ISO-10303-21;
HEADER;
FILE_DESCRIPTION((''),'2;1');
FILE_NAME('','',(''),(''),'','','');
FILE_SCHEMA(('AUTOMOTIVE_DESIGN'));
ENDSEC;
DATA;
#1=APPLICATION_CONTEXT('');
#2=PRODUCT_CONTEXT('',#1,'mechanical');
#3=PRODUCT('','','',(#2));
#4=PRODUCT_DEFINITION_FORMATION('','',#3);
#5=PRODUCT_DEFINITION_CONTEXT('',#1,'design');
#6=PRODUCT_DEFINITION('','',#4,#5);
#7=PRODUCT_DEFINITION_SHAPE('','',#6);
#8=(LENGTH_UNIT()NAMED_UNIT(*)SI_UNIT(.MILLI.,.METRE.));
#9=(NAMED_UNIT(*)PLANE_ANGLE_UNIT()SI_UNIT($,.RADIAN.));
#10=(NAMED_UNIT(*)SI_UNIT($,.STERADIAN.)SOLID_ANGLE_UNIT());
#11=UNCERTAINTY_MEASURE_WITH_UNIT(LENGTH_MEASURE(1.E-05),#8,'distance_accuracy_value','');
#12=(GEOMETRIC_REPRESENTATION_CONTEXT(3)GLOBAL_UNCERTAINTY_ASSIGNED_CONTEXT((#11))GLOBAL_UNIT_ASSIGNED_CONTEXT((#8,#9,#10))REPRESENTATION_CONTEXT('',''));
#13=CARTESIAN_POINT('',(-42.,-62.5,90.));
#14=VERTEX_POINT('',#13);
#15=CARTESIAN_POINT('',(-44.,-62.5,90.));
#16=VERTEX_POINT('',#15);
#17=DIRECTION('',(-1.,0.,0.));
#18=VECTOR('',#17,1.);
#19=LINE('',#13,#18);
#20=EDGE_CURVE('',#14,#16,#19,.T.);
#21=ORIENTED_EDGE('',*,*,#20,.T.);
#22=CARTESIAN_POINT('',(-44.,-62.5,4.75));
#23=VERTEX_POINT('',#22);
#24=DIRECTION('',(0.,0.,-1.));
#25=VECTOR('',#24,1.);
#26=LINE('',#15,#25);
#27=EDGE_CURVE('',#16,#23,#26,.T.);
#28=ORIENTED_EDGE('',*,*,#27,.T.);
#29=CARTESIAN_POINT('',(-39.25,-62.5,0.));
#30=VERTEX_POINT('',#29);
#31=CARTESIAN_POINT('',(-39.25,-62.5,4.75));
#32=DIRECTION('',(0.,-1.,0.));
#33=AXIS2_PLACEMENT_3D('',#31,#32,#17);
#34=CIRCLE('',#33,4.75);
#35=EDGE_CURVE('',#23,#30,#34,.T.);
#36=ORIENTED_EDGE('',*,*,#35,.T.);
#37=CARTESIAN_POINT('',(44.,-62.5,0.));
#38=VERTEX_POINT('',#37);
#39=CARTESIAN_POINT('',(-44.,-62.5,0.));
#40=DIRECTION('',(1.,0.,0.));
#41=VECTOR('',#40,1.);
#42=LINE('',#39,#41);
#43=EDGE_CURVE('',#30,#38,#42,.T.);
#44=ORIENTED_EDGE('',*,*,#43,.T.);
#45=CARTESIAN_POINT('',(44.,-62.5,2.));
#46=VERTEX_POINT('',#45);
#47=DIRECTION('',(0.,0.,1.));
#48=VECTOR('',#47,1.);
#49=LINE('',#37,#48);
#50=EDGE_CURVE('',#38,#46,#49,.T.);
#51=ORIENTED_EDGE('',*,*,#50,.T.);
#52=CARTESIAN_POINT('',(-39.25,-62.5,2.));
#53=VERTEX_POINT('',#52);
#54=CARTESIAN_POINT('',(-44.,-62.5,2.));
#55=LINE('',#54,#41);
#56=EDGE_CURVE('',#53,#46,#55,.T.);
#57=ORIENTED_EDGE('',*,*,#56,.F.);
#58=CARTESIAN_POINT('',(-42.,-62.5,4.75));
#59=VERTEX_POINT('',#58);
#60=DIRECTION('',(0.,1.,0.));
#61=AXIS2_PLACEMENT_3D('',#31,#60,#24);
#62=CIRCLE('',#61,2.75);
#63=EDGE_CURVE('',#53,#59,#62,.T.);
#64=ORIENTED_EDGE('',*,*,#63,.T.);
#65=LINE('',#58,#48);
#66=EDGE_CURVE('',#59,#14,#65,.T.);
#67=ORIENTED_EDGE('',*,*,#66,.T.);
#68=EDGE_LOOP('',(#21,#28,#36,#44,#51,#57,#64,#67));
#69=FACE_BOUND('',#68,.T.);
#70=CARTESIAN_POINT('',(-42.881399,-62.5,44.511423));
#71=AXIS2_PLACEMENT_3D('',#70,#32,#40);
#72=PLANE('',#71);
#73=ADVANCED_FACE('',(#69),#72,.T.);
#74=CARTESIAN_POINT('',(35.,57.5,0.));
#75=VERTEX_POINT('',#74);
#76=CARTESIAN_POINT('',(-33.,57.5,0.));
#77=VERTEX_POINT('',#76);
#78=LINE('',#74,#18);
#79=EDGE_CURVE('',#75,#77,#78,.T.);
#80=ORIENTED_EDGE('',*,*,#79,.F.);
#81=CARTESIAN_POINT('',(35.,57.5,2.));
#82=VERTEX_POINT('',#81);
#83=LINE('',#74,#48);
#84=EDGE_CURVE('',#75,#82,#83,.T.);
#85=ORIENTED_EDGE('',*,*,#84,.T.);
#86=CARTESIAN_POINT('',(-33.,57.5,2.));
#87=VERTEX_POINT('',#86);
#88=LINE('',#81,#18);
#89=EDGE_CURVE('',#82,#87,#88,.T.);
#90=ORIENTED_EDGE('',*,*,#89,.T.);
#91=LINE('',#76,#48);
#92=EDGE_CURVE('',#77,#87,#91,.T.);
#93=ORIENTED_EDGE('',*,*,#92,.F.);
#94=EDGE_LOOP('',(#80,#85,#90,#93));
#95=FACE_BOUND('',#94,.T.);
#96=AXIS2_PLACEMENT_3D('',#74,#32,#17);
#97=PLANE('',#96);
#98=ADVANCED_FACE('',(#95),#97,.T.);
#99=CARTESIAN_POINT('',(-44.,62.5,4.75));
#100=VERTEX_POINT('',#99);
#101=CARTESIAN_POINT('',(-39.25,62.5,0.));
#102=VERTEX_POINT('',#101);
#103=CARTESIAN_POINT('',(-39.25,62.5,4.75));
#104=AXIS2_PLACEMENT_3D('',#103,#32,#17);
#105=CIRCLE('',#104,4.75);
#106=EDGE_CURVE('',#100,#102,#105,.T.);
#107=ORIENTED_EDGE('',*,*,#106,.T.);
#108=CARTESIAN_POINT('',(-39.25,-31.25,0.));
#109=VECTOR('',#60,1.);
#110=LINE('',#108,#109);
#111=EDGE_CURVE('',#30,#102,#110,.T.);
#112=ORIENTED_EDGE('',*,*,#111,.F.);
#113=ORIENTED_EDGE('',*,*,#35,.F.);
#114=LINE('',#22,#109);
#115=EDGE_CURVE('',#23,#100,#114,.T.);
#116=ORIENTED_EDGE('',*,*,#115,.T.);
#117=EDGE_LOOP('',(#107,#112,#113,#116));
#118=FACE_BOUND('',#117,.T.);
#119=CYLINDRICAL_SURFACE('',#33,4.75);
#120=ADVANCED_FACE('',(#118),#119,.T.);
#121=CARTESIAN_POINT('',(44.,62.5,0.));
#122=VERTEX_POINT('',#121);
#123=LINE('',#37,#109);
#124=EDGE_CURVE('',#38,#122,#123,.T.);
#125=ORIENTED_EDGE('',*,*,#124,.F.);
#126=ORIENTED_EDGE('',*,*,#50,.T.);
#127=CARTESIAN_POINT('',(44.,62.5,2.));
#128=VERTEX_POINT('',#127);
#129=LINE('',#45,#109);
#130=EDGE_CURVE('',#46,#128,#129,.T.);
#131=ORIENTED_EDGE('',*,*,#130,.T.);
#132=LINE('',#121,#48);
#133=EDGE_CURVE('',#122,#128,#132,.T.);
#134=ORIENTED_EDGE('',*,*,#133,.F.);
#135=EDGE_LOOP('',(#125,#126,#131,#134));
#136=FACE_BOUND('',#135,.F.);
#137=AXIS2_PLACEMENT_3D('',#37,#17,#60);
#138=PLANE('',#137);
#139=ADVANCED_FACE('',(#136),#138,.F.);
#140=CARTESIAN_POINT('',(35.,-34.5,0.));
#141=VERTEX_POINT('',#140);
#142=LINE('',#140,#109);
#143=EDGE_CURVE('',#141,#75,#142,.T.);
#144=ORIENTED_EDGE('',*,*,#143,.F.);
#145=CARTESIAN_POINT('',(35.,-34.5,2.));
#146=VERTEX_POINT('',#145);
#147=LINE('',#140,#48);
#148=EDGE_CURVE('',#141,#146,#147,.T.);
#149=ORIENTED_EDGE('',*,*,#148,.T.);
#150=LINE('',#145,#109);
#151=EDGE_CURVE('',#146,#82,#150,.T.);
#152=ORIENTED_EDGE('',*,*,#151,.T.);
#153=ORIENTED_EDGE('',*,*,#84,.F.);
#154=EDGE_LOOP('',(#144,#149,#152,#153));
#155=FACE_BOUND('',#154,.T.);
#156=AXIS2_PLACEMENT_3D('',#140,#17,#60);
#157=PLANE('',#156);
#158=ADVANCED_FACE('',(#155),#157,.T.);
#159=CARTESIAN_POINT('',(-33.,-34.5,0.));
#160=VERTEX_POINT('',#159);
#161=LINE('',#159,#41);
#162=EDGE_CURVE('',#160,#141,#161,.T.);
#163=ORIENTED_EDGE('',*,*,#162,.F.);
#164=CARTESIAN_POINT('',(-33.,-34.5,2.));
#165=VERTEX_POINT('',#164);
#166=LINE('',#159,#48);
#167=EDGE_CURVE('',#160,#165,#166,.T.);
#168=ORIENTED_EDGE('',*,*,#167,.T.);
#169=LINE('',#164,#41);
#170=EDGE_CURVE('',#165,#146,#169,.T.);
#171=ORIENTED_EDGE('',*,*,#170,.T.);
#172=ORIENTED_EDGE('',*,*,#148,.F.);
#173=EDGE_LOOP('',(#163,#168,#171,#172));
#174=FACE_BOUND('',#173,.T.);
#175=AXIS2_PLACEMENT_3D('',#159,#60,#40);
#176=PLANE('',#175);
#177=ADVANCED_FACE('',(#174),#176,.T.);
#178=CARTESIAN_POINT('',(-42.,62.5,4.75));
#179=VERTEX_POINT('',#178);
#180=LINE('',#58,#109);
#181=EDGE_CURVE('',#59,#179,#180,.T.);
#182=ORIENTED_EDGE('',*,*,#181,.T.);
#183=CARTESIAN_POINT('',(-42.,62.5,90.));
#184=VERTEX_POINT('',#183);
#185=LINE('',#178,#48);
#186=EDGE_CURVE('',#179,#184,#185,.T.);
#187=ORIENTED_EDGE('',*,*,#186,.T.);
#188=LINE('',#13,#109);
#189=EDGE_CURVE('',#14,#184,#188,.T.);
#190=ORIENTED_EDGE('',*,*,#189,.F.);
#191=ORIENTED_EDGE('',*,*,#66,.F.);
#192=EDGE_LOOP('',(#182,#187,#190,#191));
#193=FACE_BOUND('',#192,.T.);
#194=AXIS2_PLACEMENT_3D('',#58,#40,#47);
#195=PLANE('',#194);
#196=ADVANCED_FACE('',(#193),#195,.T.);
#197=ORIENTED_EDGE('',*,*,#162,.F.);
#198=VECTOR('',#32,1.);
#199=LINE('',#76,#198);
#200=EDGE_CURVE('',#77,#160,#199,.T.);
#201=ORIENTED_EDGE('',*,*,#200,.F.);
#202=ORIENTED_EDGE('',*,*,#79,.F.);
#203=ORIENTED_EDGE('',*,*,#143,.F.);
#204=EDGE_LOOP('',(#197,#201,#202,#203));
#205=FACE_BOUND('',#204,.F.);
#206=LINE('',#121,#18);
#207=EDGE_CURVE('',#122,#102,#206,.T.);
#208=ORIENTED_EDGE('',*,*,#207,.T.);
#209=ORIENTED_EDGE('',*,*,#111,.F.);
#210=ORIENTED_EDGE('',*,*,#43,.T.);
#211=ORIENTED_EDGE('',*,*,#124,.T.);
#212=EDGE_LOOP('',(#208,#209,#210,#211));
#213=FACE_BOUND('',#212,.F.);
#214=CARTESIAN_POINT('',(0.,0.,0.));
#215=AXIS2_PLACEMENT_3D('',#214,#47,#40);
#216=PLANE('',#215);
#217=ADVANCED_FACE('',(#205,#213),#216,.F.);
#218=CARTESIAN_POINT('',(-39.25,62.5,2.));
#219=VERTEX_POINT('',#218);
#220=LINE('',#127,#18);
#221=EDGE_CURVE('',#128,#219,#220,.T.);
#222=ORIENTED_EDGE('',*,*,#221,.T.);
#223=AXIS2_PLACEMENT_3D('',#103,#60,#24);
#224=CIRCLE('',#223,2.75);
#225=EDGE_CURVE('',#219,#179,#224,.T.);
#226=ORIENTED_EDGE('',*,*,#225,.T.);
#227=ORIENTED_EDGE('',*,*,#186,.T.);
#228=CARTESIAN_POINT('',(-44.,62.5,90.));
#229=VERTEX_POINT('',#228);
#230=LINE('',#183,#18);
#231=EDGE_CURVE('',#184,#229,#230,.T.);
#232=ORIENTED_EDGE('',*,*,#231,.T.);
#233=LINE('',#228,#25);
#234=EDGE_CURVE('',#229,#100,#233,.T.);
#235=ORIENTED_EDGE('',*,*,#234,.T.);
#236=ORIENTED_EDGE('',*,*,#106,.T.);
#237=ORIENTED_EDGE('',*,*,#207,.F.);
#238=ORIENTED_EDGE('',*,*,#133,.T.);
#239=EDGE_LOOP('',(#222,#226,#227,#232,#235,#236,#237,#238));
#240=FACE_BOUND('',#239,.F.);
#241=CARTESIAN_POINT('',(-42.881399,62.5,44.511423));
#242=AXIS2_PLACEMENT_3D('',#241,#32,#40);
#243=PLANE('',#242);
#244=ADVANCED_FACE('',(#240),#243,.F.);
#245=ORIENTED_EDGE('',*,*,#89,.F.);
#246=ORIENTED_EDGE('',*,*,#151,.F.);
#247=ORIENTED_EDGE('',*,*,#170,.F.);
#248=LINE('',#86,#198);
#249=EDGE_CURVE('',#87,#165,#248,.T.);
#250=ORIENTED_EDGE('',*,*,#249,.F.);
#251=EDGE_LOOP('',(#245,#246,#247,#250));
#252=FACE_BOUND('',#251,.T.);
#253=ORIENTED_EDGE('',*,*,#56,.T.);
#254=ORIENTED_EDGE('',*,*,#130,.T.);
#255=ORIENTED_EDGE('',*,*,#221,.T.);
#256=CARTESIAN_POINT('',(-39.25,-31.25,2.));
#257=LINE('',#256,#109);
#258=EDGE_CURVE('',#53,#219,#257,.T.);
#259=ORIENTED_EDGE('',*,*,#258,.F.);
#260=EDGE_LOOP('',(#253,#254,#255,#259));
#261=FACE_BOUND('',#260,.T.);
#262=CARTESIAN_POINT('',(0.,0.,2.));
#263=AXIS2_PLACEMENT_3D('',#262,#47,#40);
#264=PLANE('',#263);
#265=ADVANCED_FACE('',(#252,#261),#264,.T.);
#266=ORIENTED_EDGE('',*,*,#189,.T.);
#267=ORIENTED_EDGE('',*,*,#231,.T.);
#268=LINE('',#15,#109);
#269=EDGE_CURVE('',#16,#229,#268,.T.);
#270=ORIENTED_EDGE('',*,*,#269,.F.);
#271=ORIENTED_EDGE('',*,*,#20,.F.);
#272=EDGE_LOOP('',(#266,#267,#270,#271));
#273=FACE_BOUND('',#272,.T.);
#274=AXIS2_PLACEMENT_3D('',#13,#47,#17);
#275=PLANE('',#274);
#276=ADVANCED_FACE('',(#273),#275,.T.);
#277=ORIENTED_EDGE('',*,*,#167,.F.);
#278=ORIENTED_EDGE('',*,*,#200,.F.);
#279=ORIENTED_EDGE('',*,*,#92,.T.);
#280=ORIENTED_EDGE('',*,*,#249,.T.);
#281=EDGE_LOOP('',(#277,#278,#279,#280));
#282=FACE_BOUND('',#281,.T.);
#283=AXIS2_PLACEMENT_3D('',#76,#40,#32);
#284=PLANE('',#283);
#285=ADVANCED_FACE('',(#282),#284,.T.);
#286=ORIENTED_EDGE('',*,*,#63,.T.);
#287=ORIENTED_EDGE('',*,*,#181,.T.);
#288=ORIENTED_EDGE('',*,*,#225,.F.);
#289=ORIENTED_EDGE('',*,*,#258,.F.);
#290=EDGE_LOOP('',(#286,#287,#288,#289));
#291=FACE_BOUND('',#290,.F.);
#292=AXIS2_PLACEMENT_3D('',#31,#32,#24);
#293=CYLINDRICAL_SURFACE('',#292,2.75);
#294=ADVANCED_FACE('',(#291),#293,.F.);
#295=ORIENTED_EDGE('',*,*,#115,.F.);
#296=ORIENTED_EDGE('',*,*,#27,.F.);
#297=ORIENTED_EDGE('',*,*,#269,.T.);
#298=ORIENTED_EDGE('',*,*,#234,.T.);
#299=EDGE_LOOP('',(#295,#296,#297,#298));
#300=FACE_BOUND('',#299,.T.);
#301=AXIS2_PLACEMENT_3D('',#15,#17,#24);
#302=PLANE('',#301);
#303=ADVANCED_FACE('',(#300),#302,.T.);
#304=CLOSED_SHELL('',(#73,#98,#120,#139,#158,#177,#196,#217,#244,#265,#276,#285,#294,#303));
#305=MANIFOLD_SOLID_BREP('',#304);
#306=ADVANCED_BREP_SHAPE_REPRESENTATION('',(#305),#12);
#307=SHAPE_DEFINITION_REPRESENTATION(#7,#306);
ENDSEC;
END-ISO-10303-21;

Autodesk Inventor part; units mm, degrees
ref_plane "YZ Plane" through (0, 0, 0) normal (1, 0, 0) x (0, 1, 0)
ref_plane "XZ Plane" through (0, 0, 0) normal (0, 1, 0) x (-1, 0, 0)
ref_plane "XY Plane" through (0, 0, 0) normal (0, 0, 1) x (1, 0, 0)
sketch "Sketch1" plane through (0, 0, 0) normal (0, 0, 1) x (1, 0, 0)
  line L0 (-44, -62.5) -> (44, -62.5)
  line L1 (44, -62.5) -> (44, 62.5)
  line L2 (44, 62.5) -> (-44, 62.5)
  line L3 (-44, 62.5) -> (-44, -62.5)
  line L4 (-44, -62.5) -> (44, 62.5) construction
  line L5 (44, -62.5) -> (-44, 62.5) construction
  line L6 (35, 57.5) -> (-33, 57.5)
  line L7 (-33, 57.5) -> (-33, -34.5)
  line L8 (-33, -34.5) -> (35, -34.5)
  line L9 (35, -34.5) -> (35, 57.5)
  point P0 (0, 0)
  dimension "d154" = 88
  dimension "d155" = 125
  dimension "d185" = 68
  dimension "d186" = 92
  dimension "d187" = 11
  dimension "d188" = 9
  dimension "d190" = 5
extrude "Plate5" add sketch "Sketch1" along normal blind 2
sketch "Sketch7" plane through (-42, -62.5, 0) normal (-1, 0, 0) x (0, -1, 0)
  line L0 (-125, 0) -> (0, 0)
  line L1 (0, 0) -> (0, 90)
  line L2 (0, 90) -> (-125, 90)
  line L3 (-125, 90) -> (-125, 0)
edge flange "Flange3" height 90 angle 90 thickness 2 bend radius 2.75 thickness toward (-1, 0, 0) relief round relief width 2 relief depth 1 edges at (-44, 0, 2) wall of the first edge with corners at (-42, 62.5, 0) (-42, -62.5, 0) (-42, -62.5, 90) (-42, 62.5, 90)
bend "Bend3"
corner "Corner3"
sketch "Sketch9" plane through (-44, -62.5, 90) normal (-1, 0, 0) x (0, 0, 1)
  line L0 (-27.375, 69.75) -> (-57.875, 69.75)
  line L1 (-57.875, 69.75) -> (-57.875, 100.25)
  line L2 (-57.875, 100.25) -> (-27.375, 100.25)
  line L3 (-27.375, 100.25) -> (-27.375, 69.75)
  line L4 (-27.375, 69.75) -> (-57.875, 100.25) construction
  line L5 (-57.875, 69.75) -> (-27.375, 100.25) construction
  circle A0 centre (-19.625, 62) radius 2.5
  circle A1 centre (-65.625, 62) radius 2.5
  circle A2 centre (-65.625, 108) radius 2.5
  circle A3 centre (-19.625, 108) radius 2.5
  circle A4 centre (-42.625, 85) radius 32.5269 construction
  line L6 (-57.875, 69.75) -> (-65.625, 62) construction
  line L7 (-17.125, 59.5) -> (-68.125, 59.5) construction
  line L8 (-68.125, 59.5) -> (-68.125, 110.5) construction
  line L9 (-68.125, 110.5) -> (-17.125, 110.5) construction
  line L10 (-17.125, 110.5) -> (-17.125, 59.5) construction
  line L11 (-17.125, 59.5) -> (-68.125, 110.5) construction
  line L12 (-68.125, 59.5) -> (-17.125, 110.5) construction
  line L13 (-85.25, 125) -> (0, 125) projected
  line L14 (-42.625, 125) -> (-42.625, 85) construction
  circle A5 centre (-65.625, 108) radius 10.9602 construction
  line L15 (-19.625, 62) -> (-65.625, 62) construction
  line L16 (-65.625, 62) -> (-65.625, 108) construction
  line L17 (-65.625, 108) -> (-19.625, 108) construction
  line L18 (-19.625, 108) -> (-19.625, 62) construction
  line L19 (-19.625, 62) -> (-65.625, 108) construction
  line L20 (-65.625, 62) -> (-19.625, 108) construction
  point P0 (-90, 62.5)
  point P1 (-104.8197, 150.8767)
  point P2 (-104.8197, 150.8767)
  dimension "d181" = 21.9203
  dimension "d174" = 30.5
  dimension "d175" = 30.5
  dimension "d176" = 5
  dimension "d179" = 40
  dimension "d180" = 51
  dimension "d184" = 46
cut "Cut2" [suppressed]
properties part number "PRS 1652 DrSysB Central tube wall_D1200" material "Stainless Steel"
